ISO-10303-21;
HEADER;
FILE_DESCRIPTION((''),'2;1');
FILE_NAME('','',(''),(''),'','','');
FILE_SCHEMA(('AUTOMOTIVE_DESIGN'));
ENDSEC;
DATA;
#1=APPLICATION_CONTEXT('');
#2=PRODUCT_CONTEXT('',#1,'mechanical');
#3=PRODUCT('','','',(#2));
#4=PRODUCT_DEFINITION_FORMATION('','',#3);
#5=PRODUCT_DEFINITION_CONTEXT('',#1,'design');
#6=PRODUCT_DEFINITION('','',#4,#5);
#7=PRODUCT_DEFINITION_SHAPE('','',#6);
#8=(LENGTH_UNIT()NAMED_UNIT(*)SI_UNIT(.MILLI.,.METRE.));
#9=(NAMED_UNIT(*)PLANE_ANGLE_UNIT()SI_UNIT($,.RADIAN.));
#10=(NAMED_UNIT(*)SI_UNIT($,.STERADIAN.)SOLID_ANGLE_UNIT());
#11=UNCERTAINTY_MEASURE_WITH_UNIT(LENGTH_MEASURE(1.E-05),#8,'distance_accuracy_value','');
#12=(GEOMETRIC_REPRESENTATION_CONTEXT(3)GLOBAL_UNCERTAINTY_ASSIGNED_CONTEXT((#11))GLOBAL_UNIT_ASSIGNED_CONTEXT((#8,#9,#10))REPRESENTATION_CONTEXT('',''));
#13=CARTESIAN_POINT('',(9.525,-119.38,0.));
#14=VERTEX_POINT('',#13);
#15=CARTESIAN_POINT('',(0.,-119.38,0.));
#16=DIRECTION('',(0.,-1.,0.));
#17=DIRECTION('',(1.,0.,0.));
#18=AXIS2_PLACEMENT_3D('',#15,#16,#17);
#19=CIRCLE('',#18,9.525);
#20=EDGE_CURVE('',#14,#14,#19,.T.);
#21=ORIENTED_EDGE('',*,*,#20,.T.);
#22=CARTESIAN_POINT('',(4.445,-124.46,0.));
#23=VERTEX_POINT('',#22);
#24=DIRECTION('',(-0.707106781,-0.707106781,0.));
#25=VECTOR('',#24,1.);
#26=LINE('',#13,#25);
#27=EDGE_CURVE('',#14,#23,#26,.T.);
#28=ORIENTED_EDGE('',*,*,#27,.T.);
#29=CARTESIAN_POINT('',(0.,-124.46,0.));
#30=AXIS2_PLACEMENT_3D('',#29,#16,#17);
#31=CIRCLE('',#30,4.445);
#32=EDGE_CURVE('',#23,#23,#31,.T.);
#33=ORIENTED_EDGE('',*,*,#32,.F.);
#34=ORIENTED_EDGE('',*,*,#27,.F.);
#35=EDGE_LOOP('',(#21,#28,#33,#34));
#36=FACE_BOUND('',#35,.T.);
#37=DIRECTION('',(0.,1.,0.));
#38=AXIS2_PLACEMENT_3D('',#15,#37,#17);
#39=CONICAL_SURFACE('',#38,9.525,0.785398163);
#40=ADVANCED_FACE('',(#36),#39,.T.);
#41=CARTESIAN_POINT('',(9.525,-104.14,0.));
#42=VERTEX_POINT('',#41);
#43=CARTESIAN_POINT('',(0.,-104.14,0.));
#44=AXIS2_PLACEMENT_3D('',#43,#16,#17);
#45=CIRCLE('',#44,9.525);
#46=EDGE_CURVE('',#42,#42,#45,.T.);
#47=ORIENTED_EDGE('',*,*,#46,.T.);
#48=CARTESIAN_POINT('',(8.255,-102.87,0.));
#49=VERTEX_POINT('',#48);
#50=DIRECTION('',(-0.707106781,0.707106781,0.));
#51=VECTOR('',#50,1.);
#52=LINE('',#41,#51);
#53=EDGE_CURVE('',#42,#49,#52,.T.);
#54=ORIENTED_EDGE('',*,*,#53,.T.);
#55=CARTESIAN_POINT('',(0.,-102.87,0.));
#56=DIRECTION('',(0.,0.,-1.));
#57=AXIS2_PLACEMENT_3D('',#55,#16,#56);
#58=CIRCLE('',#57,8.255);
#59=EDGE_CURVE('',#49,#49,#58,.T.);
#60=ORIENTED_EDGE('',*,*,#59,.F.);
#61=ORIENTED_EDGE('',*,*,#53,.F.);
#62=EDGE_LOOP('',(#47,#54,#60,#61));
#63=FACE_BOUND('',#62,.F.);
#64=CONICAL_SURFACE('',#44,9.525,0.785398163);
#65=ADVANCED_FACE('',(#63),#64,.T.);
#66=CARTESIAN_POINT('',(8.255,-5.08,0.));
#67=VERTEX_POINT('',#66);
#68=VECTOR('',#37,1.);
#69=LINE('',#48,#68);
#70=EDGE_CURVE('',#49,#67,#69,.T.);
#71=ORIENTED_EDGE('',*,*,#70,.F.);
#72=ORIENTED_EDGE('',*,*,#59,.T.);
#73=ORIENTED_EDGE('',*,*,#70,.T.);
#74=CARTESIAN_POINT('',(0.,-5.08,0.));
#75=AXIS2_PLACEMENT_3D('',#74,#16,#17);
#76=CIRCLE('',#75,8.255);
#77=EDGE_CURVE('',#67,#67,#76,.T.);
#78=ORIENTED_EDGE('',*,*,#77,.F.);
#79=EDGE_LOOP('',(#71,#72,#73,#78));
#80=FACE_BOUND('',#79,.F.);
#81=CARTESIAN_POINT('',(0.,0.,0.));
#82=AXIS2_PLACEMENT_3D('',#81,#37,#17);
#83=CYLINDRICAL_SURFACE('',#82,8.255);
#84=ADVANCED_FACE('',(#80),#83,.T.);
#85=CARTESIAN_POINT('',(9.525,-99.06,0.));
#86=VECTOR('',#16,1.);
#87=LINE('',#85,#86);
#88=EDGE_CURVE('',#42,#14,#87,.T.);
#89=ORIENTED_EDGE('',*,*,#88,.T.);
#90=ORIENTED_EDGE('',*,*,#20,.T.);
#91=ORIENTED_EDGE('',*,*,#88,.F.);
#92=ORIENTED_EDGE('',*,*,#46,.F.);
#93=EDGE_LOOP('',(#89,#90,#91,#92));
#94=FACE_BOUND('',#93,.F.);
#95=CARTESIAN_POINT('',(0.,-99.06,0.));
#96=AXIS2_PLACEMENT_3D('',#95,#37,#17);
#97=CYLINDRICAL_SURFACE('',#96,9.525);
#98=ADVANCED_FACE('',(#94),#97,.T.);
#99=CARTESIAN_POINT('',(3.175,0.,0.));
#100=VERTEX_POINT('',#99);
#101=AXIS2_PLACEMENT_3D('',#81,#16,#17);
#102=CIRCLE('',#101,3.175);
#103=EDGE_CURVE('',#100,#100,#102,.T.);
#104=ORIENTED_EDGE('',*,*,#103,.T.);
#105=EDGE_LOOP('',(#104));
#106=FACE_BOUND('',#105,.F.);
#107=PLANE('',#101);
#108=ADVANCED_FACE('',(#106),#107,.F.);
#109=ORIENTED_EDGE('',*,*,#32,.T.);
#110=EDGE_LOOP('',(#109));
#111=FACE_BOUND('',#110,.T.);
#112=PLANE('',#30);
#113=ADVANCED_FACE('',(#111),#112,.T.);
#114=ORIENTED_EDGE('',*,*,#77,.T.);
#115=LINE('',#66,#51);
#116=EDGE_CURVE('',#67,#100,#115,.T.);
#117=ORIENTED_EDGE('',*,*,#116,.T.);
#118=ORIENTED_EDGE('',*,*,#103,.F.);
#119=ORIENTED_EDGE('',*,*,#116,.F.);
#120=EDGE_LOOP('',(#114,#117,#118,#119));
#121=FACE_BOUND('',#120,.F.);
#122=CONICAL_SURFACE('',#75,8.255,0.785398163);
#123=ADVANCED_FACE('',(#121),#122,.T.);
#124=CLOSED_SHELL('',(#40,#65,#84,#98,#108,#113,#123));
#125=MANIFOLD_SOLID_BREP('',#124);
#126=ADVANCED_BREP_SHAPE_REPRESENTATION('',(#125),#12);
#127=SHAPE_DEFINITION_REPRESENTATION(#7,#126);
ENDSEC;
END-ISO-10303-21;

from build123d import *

# Parameters (mm, degrees)
F0_R        = 8.255
F1_DEPTH    = 99.06
F2_R        = 9.525
F3_DEPTH    = 25.4
F4_S5_R     = 8.255
F4_T6_DEPTH = 15
F5_SIZE     = 5.08


# Not quite as in the source:
# - a fillet or chamfer that OpenCascade refuses, or shapes differently, is made with other operations: its cross-section is extruded or revolved along the edge and cut away or added


with BuildPart() as f1:
    # F0 (on Front) → F1 (new body)
    with BuildSketch(Plane.XZ):
        Circle(F0_R)
    extrude(amount=F1_DEPTH)

    # F2 (on face) → F3 (join)
    with BuildSketch(Plane.XZ.offset(99.06)):
        Circle(F2_R)
    extrude(amount=F3_DEPTH)

    # F4: chamfer of 5.08 on 3 edges, made by hand


with BuildPart() as f4_tool2:
    # F4_s3 → F4_t4 (revolve)
    with BuildSketch(Plane.XY):
        Polygon((9.525, -104.14), (4.445, -99.06), (9.525, -99.06), align=None)
    revolve(axis=Axis((0, -99.06, 0), (0, -1, 0)))

    # F4_s5 → F4_t6 (cut, symmetric)
    with BuildSketch(Plane.XZ.offset(101.6)):
        Circle(F4_S5_R)
    extrude(amount=F4_T6_DEPTH, both=True, mode=Mode.SUBTRACT)


with BuildPart() as f1_1:
    add(f1.part)

    # F4_t1: cut F4_tool2
    add(f4_tool2.part, mode=Mode.SUBTRACT)

    # F4_s7 → F4_t8 (revolve, cut)
    with BuildSketch(Plane.XY):
        Polygon((9.525, -119.38), (4.445, -124.46), (9.525, -124.46), align=None)
    revolve(axis=Axis((0, -124.46, 0), (0, -1, 0)), mode=Mode.SUBTRACT)

    # F5
    f5_edges = [f1_1.edges().sort_by_distance(p)[0] for p in [
        (-8.255, 0, 0),
    ]]
    chamfer(f5_edges, length=F5_SIZE)


solid = f1_1.part
